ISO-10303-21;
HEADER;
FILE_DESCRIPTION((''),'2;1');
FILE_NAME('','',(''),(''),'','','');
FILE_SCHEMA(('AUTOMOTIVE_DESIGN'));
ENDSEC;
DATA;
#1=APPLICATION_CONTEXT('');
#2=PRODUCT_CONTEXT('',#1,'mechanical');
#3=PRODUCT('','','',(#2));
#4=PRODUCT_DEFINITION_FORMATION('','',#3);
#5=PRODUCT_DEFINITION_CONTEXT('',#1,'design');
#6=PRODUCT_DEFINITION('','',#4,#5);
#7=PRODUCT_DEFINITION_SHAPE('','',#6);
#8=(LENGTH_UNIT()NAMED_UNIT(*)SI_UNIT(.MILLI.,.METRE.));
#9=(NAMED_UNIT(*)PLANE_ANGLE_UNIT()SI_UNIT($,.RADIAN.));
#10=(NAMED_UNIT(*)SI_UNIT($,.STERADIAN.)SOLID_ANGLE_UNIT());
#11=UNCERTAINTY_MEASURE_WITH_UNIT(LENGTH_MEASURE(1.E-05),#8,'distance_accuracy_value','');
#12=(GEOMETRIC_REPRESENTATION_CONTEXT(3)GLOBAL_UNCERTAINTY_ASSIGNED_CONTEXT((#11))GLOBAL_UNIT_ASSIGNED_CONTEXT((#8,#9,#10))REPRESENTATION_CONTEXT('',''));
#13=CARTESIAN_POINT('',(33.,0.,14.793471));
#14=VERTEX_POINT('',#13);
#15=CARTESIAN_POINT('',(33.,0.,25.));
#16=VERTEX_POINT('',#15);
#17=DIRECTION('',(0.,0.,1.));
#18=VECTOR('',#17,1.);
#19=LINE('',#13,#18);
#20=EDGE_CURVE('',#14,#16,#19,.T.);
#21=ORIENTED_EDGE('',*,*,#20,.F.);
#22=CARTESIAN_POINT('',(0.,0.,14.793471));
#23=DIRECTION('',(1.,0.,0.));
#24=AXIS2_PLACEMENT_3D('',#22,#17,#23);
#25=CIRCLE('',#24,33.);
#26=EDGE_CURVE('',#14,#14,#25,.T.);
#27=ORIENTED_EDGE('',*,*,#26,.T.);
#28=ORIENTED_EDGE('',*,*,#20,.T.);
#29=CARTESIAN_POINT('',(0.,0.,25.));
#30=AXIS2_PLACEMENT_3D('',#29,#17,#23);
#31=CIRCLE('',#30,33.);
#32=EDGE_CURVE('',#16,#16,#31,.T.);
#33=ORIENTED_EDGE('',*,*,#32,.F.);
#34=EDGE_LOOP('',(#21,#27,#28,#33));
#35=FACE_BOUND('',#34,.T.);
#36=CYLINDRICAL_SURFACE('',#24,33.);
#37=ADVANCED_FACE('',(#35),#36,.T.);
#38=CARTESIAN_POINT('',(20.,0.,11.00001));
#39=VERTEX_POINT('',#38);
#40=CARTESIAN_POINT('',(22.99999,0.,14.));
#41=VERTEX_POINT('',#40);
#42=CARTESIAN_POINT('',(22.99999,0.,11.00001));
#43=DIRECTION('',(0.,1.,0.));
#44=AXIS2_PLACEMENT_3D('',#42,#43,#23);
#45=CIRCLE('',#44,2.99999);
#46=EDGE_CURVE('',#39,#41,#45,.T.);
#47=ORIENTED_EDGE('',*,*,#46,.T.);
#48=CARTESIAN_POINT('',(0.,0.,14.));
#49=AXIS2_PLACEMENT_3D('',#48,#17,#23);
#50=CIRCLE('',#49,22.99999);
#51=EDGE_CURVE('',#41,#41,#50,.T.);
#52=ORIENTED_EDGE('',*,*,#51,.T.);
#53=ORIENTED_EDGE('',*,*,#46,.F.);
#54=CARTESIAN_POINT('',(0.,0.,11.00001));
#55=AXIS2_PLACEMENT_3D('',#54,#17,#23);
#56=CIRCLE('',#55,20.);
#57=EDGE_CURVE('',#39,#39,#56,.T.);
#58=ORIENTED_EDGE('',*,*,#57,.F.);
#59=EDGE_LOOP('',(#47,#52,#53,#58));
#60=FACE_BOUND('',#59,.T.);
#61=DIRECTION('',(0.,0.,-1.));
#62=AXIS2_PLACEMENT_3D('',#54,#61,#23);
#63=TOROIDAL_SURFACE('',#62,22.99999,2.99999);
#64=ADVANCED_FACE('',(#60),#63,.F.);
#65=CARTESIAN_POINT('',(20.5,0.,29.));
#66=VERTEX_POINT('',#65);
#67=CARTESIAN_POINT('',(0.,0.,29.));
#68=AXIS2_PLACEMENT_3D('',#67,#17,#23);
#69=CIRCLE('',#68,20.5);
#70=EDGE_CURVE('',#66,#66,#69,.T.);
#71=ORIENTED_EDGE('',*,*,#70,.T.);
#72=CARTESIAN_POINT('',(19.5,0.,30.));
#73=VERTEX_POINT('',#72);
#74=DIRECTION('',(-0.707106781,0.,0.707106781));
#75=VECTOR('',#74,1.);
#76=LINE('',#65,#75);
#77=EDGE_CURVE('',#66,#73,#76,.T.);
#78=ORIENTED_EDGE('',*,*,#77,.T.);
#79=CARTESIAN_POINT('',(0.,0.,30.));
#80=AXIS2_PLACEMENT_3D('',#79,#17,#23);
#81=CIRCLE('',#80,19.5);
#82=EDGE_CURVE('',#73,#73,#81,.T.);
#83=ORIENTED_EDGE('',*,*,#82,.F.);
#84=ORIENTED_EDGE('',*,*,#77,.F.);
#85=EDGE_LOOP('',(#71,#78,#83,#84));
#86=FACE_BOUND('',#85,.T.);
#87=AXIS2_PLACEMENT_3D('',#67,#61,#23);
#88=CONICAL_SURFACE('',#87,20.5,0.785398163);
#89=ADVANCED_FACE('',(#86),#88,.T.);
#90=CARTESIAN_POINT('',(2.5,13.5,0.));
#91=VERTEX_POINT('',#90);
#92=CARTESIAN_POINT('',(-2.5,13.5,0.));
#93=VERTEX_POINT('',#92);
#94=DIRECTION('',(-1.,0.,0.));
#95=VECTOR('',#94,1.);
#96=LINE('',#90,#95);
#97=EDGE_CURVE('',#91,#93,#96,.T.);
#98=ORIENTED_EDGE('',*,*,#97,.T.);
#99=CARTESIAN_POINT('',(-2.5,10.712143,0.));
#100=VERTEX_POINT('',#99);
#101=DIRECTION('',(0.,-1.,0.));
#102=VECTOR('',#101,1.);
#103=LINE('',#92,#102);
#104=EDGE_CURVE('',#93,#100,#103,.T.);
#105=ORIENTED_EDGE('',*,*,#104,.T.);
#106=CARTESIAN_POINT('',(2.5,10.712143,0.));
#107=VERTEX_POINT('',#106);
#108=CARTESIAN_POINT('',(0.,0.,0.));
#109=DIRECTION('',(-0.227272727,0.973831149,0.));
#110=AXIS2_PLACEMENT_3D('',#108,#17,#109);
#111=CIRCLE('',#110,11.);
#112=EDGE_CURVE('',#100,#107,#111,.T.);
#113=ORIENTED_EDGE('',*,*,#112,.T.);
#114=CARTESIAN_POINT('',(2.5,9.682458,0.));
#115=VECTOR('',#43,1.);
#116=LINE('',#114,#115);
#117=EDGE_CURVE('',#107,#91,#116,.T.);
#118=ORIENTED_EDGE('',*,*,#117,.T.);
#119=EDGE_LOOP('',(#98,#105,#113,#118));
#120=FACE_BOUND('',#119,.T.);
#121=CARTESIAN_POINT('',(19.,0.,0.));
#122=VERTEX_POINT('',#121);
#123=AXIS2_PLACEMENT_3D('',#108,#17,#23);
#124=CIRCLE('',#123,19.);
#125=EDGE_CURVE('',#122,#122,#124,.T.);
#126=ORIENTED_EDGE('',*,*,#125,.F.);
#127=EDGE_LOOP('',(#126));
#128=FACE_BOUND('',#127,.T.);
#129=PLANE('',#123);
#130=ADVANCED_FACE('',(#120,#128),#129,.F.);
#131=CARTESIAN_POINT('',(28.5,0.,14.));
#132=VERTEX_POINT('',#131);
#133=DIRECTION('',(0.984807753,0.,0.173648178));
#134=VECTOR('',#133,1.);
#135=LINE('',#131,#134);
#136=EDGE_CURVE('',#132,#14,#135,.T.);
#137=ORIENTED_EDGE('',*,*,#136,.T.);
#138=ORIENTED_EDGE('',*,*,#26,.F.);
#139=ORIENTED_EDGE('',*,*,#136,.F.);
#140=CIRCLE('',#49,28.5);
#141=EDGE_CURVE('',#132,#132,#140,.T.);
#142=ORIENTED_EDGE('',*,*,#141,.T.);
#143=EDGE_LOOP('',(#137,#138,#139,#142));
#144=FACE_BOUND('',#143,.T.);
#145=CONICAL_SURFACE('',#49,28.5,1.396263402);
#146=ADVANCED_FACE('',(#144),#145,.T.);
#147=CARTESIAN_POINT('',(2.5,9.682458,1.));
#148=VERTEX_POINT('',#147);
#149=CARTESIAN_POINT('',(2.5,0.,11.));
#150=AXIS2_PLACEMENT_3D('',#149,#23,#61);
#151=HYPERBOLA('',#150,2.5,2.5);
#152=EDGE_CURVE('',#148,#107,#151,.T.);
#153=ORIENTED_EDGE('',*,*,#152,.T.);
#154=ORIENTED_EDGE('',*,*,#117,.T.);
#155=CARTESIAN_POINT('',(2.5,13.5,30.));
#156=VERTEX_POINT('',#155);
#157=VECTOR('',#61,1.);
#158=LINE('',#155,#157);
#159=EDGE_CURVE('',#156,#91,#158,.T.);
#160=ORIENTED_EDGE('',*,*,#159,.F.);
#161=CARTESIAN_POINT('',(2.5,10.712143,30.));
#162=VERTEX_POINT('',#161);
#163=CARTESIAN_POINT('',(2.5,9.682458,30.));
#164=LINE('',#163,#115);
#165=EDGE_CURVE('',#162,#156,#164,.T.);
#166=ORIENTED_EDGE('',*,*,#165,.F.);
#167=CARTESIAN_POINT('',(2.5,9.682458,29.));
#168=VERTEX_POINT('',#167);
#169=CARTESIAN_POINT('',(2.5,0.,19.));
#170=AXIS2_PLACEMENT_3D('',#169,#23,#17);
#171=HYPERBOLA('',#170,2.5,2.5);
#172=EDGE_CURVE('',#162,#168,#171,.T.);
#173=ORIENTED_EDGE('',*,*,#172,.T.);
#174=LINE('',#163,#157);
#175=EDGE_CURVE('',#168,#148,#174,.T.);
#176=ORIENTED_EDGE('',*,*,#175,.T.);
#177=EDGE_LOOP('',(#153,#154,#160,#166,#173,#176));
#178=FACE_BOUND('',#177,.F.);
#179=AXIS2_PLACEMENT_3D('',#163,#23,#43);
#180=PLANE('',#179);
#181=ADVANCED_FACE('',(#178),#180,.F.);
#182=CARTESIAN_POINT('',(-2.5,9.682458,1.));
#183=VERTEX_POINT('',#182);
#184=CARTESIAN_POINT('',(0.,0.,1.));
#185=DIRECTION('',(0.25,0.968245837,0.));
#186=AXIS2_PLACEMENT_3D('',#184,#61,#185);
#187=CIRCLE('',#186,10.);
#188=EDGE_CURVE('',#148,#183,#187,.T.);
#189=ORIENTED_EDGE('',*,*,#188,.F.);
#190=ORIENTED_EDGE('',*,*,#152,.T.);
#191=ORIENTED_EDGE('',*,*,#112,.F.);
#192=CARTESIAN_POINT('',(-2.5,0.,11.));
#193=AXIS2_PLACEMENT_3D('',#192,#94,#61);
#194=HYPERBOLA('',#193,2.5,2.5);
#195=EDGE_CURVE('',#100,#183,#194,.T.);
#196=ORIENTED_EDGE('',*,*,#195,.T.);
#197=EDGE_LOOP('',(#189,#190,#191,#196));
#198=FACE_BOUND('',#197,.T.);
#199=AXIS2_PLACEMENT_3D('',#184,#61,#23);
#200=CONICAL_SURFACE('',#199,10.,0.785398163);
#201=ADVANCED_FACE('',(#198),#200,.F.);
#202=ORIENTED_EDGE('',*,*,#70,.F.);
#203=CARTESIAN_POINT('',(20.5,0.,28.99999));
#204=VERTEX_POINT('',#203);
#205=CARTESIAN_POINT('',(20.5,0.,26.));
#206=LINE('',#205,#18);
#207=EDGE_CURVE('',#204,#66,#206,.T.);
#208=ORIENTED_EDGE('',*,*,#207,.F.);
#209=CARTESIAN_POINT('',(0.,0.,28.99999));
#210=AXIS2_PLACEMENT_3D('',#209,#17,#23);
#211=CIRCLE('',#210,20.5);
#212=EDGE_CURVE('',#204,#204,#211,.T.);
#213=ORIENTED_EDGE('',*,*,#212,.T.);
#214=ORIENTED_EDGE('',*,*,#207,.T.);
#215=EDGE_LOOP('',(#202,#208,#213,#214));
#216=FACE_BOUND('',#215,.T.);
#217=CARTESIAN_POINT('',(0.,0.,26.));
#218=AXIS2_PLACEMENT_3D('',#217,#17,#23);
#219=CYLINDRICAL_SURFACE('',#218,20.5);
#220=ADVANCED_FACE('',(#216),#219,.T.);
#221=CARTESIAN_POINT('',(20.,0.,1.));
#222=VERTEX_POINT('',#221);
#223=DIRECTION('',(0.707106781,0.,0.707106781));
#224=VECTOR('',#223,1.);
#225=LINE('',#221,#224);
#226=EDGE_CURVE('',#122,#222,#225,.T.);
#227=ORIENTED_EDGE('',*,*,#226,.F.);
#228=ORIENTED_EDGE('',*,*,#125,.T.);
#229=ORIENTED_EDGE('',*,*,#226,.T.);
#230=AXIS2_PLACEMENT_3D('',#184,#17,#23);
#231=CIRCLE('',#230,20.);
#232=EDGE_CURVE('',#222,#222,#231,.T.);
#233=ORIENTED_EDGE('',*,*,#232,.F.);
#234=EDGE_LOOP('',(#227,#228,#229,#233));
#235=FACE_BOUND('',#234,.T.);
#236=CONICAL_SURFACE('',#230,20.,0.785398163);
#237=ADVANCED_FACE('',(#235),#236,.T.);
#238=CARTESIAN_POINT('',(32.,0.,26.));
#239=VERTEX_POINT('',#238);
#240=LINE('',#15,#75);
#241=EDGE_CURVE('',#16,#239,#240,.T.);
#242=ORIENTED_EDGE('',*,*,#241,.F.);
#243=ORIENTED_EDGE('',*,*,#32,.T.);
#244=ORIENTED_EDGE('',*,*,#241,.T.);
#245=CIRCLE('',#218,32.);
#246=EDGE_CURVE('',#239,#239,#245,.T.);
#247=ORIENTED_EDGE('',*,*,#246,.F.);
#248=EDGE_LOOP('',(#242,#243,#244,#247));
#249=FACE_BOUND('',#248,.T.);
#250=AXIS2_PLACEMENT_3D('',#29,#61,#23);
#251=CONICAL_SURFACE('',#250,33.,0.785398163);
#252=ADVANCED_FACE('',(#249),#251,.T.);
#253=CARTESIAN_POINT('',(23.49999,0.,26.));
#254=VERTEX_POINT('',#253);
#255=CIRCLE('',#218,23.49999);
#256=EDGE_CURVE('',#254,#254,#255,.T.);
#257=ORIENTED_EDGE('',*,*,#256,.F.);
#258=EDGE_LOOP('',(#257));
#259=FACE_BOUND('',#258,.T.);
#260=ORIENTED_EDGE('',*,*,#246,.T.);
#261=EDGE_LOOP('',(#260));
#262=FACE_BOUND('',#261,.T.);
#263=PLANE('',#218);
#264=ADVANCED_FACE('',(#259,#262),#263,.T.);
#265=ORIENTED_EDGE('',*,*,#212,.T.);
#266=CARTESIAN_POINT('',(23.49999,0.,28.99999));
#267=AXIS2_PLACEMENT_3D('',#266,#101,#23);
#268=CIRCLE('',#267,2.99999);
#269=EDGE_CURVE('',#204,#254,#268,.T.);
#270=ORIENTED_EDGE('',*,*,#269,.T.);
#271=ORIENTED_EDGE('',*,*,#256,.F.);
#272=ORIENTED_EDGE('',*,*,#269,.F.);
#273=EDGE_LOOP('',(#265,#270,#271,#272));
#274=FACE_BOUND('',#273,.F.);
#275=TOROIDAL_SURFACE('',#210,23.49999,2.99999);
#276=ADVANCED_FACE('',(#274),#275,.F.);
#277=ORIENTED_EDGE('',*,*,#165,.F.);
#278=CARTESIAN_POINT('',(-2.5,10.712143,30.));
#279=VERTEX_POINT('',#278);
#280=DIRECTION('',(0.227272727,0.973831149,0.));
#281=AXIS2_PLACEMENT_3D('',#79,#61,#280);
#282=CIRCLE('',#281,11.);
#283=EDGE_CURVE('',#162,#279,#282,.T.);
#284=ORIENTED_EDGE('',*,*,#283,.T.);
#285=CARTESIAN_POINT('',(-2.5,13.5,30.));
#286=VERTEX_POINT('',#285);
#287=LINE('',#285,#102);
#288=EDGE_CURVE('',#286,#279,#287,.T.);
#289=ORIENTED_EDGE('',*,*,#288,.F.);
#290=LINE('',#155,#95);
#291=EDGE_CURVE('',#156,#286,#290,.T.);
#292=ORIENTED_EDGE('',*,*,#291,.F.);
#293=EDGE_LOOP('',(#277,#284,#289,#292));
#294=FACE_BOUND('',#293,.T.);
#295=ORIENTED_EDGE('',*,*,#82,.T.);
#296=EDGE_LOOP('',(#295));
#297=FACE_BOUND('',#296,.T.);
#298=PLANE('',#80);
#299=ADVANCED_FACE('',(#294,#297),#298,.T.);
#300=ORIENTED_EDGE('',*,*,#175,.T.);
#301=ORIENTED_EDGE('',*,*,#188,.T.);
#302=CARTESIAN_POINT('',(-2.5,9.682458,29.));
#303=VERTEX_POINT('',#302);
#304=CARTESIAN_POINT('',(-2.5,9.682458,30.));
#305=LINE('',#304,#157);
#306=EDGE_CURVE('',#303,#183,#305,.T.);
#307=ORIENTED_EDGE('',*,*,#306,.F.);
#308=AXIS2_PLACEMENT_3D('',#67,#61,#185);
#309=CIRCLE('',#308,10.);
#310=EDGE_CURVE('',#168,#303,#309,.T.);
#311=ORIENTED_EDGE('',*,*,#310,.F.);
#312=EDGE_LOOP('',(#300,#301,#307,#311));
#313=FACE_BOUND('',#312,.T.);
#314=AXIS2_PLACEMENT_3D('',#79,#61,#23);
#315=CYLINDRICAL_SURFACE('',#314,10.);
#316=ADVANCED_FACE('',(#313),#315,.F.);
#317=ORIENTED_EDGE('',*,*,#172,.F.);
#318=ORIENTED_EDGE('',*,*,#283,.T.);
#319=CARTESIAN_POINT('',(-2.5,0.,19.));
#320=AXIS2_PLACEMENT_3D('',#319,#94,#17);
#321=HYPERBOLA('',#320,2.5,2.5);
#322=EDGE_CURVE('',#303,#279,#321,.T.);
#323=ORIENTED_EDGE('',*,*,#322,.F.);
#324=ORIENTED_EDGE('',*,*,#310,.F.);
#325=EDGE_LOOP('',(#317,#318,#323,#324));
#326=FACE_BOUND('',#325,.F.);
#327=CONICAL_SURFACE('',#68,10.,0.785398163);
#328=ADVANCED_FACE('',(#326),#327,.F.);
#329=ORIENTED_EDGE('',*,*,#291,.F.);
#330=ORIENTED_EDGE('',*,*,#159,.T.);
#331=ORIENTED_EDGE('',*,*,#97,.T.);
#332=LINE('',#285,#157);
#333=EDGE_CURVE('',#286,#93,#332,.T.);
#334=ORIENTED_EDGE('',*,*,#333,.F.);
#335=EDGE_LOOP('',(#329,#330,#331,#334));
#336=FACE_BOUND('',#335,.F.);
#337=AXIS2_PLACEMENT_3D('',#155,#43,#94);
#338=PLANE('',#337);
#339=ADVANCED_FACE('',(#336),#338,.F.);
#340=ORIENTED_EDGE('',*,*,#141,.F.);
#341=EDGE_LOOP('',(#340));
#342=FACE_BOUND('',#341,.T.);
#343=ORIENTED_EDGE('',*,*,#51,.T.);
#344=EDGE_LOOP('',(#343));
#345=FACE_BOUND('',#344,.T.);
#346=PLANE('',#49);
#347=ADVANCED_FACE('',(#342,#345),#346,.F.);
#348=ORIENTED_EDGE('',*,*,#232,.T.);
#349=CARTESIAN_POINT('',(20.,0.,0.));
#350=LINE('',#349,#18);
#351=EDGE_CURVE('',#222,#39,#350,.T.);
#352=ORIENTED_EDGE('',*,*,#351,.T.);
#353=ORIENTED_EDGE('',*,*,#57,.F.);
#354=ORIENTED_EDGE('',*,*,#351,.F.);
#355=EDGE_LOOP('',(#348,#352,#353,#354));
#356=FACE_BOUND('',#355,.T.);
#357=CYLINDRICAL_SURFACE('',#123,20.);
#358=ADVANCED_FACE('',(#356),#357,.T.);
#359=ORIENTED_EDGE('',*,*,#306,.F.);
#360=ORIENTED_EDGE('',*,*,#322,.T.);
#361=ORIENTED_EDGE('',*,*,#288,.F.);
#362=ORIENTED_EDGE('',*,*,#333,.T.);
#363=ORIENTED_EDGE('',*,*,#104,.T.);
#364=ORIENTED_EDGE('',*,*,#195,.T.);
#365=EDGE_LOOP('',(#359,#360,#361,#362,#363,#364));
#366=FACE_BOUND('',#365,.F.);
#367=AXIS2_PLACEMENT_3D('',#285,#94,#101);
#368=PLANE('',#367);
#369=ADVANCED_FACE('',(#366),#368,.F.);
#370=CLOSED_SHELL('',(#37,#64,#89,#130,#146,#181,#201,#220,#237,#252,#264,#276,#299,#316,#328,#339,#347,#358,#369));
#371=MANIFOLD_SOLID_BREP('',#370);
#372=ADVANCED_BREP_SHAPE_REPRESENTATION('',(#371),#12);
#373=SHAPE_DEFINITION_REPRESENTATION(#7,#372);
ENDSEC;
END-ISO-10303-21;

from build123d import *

# Parameters (mm, degrees)
F2_SIZE  = 1
F3_R     = 2.99999
F5_DEPTH = 30


# Not quite as in the source:
# - a fillet or chamfer is up to 0.001 mm smaller than in the source, because OpenCascade refuses the exact size


with BuildPart() as f1:
    # F0 (on Front) → F1 (revolve)
    with BuildSketch(Plane.XZ):
        Polygon((10, 30), (10, 0), (20, 0), (20, 14), (28.5, 14), (33, 14.7934714132), (33, 26), (20.5, 26), (20.5, 30), align=None)
    revolve(axis=Axis((0, 0, 2.9418331105), (0, 0, 1)))

    # F2
    f2_edges = [f1.edges().sort_by_distance(p)[0] for p in [
        (-20.5, 0, 30),
        (-33, 0, 26),
        (-20, 0, 0),
        (-10, 0, 30),
        (-10, 0, 0),
    ]]
    chamfer(f2_edges, length=F2_SIZE)

    # F3 (radius 3 in the source; OpenCascade refuses exactly that, so slightly less here)
    f3_edges = [f1.edges().sort_by_distance(p)[0] for p in [
        (-20, 0, 14),
        (-20.5, 0, 26),
    ]]
    fillet(f3_edges, radius=F3_R)

    # F4 (on face) → F5 (cut, through all)
    with BuildSketch(Plane.XY.offset(30)):
        with BuildLine():
            Line((2.5, 13.5), (-2.5, 13.5))
            Line((-2.5, 13.5), (-2.5, 10.7121426428))
            ThreePointArc((-2.5, 10.7121426428), (0, 11), (2.5, 10.7121426428))
            Line((2.5, 10.7121426428), (2.5, 13.5))
        make_face()
        with BuildLine():
            ThreePointArc((2.5, 10.7121426428), (0, 11), (-2.5, 10.7121426428))
            Line((-2.5, 10.7121426428), (-2.5, 9.6824583655))
            ThreePointArc((-2.5, 9.6824583655), (0, 10), (2.5, 9.6824583655))
            Line((2.5, 9.6824583655), (2.5, 10.7121426428))
        make_face()
    extrude(amount=-F5_DEPTH, mode=Mode.SUBTRACT)


solid = f1.part
